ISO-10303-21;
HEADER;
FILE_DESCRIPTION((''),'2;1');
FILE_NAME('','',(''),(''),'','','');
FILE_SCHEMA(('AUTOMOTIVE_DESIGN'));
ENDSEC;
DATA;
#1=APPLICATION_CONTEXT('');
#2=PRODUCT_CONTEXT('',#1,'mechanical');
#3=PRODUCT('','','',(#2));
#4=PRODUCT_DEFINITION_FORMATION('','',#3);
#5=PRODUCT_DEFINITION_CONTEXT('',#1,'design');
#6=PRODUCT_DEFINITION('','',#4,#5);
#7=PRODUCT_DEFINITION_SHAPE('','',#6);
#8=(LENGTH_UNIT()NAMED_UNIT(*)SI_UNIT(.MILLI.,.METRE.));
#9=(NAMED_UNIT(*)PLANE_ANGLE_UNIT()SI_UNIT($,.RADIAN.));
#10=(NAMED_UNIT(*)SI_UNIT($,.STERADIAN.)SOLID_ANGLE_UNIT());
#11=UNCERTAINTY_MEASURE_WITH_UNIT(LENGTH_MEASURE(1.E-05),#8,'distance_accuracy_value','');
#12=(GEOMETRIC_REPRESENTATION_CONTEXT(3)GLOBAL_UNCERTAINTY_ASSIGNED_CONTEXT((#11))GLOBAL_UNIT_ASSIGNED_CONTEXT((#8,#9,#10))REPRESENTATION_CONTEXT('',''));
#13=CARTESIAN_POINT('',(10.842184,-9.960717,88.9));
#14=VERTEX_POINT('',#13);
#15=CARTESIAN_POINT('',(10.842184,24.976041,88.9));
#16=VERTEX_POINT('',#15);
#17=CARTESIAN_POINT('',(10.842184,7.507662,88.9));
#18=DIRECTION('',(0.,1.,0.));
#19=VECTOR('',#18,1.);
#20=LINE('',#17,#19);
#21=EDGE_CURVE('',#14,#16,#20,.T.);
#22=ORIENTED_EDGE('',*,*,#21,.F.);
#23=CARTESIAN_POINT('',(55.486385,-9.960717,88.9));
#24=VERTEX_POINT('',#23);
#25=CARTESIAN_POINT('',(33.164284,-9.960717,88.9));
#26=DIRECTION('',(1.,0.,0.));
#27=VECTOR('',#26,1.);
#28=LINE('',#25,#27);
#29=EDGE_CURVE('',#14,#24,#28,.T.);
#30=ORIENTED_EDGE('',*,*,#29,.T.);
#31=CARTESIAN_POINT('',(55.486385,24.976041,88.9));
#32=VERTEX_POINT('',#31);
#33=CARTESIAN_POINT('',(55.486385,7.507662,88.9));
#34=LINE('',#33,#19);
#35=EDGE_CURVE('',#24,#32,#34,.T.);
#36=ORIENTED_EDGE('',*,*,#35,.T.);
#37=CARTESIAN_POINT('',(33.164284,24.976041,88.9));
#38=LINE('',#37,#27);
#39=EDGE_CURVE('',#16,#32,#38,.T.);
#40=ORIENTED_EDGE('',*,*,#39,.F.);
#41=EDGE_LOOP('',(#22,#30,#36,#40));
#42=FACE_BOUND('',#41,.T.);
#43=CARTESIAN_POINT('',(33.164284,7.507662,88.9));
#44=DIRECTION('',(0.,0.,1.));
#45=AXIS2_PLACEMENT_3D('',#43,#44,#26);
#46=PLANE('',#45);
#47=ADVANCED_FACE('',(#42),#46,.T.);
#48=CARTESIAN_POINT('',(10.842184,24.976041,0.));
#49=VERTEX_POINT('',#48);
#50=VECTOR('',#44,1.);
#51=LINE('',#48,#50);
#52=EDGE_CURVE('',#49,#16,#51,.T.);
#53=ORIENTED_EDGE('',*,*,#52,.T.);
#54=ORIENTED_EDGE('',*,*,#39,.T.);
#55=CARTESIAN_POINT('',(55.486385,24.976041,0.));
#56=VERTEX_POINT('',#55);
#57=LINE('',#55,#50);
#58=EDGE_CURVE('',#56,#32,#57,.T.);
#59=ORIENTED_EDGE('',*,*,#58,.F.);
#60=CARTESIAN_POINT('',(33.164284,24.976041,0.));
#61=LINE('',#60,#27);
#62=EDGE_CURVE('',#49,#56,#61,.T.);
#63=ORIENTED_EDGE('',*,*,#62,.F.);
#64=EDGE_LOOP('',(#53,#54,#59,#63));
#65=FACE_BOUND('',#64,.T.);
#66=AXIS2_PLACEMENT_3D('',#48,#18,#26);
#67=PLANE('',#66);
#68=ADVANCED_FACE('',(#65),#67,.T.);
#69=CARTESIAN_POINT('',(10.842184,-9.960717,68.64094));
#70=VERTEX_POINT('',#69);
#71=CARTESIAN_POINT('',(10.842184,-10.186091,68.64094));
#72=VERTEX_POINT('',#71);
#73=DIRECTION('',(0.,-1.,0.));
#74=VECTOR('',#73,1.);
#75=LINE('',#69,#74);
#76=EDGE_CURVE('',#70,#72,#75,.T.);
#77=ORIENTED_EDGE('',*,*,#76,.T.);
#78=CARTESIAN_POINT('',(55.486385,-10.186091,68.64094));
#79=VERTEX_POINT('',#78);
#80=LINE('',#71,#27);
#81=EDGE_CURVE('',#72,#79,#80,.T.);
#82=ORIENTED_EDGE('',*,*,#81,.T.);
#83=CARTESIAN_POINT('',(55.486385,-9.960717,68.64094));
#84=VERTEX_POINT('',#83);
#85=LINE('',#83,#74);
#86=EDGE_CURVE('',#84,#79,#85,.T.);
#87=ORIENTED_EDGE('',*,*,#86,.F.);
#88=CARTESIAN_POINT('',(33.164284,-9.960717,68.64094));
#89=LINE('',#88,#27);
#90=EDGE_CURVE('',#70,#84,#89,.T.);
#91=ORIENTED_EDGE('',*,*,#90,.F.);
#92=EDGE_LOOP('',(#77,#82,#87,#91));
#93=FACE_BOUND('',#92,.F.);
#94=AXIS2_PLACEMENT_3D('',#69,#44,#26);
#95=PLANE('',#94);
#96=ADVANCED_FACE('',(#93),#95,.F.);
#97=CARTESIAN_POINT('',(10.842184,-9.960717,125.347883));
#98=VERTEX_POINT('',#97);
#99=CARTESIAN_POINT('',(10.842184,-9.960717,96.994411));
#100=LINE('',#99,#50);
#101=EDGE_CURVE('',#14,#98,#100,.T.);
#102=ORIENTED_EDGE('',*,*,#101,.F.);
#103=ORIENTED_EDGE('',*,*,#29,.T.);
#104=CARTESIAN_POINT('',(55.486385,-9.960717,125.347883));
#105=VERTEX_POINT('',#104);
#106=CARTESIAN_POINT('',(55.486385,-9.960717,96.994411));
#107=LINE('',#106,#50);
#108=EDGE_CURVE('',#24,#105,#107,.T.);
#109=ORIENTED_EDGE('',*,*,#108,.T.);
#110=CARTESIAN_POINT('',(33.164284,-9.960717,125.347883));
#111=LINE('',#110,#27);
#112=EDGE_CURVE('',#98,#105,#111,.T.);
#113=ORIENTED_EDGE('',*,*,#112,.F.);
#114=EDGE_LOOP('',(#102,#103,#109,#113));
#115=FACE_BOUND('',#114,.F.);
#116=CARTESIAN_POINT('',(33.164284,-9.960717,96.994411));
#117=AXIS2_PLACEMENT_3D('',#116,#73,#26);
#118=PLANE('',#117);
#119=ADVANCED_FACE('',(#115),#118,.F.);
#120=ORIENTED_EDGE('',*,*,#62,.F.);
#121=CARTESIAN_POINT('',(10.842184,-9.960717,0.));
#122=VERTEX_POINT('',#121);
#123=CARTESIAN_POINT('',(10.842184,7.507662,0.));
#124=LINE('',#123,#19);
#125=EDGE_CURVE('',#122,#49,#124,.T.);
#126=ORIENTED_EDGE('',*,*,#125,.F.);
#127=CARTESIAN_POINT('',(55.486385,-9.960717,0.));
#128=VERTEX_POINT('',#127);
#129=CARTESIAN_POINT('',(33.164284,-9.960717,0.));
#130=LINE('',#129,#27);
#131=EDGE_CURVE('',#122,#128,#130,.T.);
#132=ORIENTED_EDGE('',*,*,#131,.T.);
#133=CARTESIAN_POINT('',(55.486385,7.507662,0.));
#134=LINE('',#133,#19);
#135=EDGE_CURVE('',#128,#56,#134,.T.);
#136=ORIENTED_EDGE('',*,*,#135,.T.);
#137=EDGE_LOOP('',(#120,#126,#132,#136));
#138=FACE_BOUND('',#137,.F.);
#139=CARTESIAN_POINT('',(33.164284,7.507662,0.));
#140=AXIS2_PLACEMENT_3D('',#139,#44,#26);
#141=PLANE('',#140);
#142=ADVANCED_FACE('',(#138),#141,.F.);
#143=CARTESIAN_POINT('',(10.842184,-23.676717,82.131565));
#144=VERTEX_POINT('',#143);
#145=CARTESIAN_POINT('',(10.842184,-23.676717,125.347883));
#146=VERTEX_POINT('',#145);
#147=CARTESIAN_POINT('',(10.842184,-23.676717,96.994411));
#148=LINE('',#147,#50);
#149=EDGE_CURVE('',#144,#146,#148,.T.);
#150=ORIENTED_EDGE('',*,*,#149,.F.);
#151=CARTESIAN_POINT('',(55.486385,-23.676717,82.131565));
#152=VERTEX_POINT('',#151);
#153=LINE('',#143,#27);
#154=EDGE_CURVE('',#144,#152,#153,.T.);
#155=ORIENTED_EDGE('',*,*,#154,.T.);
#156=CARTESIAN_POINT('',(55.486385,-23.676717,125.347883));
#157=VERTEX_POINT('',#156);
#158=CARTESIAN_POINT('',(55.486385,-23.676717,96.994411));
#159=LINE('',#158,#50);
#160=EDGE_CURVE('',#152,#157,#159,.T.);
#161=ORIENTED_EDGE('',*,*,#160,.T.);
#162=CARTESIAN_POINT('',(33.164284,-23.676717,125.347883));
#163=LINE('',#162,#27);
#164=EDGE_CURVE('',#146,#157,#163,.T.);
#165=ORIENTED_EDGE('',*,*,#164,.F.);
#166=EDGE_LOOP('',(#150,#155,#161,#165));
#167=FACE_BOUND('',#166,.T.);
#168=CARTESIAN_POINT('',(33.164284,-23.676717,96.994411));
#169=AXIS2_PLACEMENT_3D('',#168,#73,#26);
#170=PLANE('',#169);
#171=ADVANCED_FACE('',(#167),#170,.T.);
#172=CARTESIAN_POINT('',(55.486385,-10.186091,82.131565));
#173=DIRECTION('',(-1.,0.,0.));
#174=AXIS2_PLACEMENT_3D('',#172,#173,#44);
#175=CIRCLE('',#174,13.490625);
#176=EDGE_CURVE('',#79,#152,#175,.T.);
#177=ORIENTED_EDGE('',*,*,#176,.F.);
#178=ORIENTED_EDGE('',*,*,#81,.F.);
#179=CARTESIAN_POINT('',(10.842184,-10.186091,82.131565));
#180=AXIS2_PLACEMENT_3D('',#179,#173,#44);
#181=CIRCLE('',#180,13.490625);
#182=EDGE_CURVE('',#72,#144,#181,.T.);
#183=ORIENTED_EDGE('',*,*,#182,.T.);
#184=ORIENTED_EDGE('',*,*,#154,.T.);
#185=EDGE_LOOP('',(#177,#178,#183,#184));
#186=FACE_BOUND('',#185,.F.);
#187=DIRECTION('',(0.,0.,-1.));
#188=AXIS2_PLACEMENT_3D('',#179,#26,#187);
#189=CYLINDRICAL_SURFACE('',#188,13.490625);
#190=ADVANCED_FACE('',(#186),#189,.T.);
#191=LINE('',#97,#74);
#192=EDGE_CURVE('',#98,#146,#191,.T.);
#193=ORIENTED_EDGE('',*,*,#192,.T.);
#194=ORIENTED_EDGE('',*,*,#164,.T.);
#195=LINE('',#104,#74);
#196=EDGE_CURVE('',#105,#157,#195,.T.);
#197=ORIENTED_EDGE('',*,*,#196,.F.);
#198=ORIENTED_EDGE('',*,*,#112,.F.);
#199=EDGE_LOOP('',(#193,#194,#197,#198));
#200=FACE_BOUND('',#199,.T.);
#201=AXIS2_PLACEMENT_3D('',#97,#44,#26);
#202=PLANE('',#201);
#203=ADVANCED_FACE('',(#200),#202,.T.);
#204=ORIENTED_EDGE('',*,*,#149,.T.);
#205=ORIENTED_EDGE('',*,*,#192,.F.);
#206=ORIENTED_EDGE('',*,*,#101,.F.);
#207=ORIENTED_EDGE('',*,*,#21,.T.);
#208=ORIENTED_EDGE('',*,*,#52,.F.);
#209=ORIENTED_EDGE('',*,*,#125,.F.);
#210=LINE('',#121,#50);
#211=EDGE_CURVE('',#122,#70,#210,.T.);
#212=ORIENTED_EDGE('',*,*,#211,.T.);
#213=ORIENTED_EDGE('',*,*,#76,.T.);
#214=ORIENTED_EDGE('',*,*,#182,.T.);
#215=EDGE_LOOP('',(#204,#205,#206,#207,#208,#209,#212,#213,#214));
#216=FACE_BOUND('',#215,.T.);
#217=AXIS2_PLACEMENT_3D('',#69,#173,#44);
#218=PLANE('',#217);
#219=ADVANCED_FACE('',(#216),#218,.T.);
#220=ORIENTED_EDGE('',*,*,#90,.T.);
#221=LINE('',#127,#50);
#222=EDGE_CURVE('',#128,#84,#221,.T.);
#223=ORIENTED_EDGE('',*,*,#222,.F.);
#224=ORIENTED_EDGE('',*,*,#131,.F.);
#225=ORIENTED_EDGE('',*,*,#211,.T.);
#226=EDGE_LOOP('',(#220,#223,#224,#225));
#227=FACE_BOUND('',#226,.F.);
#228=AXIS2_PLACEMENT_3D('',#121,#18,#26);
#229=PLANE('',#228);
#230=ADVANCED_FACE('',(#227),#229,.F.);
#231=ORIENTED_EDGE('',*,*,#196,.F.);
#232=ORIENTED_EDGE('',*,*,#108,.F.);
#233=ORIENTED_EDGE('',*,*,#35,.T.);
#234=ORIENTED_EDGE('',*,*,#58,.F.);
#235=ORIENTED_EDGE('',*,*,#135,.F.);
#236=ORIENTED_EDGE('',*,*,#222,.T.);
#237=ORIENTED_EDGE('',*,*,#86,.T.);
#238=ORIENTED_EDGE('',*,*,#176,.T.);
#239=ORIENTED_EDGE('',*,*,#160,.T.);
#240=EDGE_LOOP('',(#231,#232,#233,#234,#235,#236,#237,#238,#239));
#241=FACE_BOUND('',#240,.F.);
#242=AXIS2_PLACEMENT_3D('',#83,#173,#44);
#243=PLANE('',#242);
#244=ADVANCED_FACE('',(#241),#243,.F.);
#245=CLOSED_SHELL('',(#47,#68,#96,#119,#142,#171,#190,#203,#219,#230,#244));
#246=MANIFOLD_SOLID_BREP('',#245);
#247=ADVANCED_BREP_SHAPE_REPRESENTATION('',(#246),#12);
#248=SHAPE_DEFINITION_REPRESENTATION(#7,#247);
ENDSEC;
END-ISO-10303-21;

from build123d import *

# Parameters (mm, degrees)
F0_W     = 44.6442011744
F0_H     = 34.9367577583
F1_DEPTH = 88.9
F2_W     = 44.6442011744
F2_H     = 56.7069426179
F3_DEPTH = 13.716
F4_R     = 13.4906253865


with BuildPart() as f1:
    # F0 (on Top) → F1 (new body)
    with BuildSketch(Plane.XY):
        with Locations((33.164284192, 7.5076622888)):
            Rectangle(F0_W, F0_H)
    extrude(amount=F1_DEPTH)

    # F2 (on face) → F3 (join)
    with BuildSketch(Plane.XZ.offset(9.9607165903)):
        with Locations((33.164284192, 96.9944112003)):
            Rectangle(F2_W, F2_H)
    extrude(amount=F3_DEPTH)

    # F4
    f4_edges = [f1.edges().sort_by_distance(p)[0] for p in [
        (33.164284, -23.676717, 68.64094),
    ]]
    fillet(f4_edges, radius=F4_R)


solid = f1.part
